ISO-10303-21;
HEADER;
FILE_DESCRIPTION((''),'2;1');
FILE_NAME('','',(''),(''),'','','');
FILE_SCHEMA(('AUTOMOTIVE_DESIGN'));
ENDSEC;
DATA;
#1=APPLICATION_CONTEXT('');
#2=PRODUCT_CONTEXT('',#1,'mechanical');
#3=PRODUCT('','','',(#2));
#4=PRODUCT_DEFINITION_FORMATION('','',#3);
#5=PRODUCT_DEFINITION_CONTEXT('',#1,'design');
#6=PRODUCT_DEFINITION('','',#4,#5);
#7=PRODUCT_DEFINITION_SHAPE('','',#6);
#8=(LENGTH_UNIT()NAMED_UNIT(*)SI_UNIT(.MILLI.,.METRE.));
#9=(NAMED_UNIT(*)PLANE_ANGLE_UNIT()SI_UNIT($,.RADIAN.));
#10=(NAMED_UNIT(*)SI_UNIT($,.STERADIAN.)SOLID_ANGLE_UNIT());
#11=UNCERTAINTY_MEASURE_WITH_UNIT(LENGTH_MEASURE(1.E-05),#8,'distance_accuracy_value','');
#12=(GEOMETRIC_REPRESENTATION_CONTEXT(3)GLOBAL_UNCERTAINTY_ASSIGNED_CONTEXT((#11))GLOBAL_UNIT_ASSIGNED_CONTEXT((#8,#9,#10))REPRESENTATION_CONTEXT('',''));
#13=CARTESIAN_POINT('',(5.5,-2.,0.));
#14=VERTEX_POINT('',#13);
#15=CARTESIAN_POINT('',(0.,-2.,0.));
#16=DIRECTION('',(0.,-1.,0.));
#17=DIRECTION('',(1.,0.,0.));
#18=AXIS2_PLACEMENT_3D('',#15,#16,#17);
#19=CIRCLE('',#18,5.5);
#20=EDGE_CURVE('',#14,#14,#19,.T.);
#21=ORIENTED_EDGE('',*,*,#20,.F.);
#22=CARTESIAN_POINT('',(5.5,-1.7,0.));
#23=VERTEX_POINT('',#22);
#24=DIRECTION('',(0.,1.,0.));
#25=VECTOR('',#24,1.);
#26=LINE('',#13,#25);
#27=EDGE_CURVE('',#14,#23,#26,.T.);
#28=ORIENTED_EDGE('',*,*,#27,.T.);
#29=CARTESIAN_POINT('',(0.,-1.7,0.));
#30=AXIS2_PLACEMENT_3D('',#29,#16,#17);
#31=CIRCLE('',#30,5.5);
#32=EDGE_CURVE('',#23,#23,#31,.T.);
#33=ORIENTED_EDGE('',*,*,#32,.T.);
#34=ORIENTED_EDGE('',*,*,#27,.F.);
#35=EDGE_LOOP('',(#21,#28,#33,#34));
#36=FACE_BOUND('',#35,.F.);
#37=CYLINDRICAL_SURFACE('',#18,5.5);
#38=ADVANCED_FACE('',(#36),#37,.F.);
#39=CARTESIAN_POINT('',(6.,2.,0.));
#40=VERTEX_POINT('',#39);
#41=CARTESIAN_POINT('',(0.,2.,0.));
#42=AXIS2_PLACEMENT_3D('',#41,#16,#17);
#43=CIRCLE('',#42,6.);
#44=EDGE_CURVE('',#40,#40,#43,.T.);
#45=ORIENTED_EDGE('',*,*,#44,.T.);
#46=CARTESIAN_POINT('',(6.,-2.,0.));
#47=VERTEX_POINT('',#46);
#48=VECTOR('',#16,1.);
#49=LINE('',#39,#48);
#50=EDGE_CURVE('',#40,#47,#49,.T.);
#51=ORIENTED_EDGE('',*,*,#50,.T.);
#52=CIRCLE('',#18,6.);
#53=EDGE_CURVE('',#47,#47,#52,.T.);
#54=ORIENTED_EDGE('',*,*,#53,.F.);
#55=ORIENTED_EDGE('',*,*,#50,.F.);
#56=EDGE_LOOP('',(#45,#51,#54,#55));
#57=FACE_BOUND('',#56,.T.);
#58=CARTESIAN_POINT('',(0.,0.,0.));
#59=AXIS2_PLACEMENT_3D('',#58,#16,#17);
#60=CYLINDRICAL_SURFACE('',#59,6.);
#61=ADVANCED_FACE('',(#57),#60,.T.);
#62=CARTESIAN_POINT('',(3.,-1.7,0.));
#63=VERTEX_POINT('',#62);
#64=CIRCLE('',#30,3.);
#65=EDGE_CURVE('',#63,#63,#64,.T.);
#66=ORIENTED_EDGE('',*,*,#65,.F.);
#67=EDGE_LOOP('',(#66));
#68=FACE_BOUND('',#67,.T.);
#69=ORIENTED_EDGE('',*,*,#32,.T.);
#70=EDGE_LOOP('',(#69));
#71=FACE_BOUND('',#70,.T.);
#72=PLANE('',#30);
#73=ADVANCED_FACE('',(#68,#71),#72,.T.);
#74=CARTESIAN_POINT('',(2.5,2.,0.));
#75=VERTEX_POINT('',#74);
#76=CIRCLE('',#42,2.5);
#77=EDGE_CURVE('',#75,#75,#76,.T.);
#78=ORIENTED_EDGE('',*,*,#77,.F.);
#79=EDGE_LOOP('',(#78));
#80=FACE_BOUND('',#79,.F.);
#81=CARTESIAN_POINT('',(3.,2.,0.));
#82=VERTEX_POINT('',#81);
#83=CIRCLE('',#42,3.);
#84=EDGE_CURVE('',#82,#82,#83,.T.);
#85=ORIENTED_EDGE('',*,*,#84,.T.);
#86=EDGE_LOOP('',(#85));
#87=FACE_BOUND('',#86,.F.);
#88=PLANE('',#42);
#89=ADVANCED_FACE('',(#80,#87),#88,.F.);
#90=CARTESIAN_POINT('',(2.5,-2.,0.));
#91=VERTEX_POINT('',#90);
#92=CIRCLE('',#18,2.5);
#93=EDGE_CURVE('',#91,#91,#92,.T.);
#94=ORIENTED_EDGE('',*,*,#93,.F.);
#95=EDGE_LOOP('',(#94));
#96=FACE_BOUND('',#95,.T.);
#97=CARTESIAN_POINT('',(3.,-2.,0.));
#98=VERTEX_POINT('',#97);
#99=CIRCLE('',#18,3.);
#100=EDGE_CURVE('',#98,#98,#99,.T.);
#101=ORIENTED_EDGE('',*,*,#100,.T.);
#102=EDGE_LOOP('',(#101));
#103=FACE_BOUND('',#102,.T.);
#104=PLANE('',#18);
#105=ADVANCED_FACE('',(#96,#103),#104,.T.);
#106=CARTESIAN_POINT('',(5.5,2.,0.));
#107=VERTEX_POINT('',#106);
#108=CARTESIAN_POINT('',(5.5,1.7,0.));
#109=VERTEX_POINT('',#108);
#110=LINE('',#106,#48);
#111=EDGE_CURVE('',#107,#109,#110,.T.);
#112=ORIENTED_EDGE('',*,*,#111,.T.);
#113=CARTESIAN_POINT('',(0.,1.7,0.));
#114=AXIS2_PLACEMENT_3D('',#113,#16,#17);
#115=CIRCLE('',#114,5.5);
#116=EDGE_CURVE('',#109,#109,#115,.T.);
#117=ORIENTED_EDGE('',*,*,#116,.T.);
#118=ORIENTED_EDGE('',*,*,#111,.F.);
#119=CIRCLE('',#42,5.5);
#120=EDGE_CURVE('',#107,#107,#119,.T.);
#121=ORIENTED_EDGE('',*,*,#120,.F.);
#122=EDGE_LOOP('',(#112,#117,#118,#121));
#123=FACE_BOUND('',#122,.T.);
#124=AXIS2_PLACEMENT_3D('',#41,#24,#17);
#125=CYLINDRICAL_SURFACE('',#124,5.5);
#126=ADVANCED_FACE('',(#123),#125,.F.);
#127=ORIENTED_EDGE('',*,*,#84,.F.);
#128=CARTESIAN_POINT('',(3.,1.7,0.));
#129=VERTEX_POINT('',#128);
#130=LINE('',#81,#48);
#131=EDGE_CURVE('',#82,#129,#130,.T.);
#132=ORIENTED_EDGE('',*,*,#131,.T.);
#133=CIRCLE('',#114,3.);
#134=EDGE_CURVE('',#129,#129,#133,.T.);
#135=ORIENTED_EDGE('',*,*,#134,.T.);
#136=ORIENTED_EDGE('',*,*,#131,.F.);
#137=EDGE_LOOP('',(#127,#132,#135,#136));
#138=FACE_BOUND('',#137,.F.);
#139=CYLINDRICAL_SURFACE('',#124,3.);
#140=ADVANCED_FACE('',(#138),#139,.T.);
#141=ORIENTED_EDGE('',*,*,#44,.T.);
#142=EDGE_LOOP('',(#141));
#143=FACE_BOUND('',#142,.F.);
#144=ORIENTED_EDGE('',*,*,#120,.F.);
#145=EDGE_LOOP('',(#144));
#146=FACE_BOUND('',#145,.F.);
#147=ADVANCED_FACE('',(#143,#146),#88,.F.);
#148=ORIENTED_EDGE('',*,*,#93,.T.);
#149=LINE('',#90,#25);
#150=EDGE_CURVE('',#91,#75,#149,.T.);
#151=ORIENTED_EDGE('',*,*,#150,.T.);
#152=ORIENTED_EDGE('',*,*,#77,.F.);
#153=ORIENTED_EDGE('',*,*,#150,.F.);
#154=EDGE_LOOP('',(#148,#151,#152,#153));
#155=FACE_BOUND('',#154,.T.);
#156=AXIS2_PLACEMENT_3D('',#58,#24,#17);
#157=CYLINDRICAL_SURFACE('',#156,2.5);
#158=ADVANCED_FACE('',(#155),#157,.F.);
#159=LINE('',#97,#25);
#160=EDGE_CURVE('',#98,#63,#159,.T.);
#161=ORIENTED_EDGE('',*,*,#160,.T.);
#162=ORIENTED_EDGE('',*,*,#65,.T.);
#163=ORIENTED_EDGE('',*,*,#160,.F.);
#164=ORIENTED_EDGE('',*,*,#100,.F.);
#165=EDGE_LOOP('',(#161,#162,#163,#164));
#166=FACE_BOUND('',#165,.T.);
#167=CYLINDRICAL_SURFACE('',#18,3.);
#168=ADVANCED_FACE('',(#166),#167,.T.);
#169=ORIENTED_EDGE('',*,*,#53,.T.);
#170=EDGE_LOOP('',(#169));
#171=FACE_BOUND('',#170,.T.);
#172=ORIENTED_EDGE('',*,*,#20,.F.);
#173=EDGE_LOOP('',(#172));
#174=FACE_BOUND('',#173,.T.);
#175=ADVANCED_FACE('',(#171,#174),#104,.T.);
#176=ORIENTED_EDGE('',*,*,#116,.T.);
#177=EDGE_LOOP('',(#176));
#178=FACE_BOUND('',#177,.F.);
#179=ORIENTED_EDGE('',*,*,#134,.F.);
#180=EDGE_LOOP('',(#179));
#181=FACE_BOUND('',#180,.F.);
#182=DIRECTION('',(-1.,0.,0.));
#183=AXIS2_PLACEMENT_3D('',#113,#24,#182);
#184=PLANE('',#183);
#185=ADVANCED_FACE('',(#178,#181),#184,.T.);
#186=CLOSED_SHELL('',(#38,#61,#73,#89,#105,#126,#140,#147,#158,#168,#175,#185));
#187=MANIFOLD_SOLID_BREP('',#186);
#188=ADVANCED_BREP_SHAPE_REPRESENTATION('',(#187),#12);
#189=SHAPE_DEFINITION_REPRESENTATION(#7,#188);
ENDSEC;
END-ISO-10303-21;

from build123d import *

# Parameters (mm, degrees)
F0_R     = 6
F0_R_2   = 2.5
F1_DEPTH = 2
F2_R     = 5.5
F2_R_2   = 3
F3_DEPTH = 0.3


# Not quite as in the source:
# - a pattern or mirror of a feature is missing from the dataset's text; its kind, count and spacing are read off the source's solid


with BuildPart() as f1:
    # F0 (on Front) → F1 (new body, symmetric)
    with BuildSketch(Plane.XZ):
        Circle(F0_R)
        Circle(F0_R_2, mode=Mode.SUBTRACT)
    extrude(amount=F1_DEPTH, both=True)

    # F2 (on face) → F3 (cut)
    with BuildSketch(Plane.XZ.offset(2)):
        Circle(F2_R)
        Circle(F2_R_2, mode=Mode.SUBTRACT)
    f3 = extrude(amount=-F3_DEPTH, mode=Mode.SUBTRACT)

    # F3_copies: F3 across plane
    add(f3.mirror(Plane.ZX), mode=Mode.SUBTRACT)


solid = f1.part
